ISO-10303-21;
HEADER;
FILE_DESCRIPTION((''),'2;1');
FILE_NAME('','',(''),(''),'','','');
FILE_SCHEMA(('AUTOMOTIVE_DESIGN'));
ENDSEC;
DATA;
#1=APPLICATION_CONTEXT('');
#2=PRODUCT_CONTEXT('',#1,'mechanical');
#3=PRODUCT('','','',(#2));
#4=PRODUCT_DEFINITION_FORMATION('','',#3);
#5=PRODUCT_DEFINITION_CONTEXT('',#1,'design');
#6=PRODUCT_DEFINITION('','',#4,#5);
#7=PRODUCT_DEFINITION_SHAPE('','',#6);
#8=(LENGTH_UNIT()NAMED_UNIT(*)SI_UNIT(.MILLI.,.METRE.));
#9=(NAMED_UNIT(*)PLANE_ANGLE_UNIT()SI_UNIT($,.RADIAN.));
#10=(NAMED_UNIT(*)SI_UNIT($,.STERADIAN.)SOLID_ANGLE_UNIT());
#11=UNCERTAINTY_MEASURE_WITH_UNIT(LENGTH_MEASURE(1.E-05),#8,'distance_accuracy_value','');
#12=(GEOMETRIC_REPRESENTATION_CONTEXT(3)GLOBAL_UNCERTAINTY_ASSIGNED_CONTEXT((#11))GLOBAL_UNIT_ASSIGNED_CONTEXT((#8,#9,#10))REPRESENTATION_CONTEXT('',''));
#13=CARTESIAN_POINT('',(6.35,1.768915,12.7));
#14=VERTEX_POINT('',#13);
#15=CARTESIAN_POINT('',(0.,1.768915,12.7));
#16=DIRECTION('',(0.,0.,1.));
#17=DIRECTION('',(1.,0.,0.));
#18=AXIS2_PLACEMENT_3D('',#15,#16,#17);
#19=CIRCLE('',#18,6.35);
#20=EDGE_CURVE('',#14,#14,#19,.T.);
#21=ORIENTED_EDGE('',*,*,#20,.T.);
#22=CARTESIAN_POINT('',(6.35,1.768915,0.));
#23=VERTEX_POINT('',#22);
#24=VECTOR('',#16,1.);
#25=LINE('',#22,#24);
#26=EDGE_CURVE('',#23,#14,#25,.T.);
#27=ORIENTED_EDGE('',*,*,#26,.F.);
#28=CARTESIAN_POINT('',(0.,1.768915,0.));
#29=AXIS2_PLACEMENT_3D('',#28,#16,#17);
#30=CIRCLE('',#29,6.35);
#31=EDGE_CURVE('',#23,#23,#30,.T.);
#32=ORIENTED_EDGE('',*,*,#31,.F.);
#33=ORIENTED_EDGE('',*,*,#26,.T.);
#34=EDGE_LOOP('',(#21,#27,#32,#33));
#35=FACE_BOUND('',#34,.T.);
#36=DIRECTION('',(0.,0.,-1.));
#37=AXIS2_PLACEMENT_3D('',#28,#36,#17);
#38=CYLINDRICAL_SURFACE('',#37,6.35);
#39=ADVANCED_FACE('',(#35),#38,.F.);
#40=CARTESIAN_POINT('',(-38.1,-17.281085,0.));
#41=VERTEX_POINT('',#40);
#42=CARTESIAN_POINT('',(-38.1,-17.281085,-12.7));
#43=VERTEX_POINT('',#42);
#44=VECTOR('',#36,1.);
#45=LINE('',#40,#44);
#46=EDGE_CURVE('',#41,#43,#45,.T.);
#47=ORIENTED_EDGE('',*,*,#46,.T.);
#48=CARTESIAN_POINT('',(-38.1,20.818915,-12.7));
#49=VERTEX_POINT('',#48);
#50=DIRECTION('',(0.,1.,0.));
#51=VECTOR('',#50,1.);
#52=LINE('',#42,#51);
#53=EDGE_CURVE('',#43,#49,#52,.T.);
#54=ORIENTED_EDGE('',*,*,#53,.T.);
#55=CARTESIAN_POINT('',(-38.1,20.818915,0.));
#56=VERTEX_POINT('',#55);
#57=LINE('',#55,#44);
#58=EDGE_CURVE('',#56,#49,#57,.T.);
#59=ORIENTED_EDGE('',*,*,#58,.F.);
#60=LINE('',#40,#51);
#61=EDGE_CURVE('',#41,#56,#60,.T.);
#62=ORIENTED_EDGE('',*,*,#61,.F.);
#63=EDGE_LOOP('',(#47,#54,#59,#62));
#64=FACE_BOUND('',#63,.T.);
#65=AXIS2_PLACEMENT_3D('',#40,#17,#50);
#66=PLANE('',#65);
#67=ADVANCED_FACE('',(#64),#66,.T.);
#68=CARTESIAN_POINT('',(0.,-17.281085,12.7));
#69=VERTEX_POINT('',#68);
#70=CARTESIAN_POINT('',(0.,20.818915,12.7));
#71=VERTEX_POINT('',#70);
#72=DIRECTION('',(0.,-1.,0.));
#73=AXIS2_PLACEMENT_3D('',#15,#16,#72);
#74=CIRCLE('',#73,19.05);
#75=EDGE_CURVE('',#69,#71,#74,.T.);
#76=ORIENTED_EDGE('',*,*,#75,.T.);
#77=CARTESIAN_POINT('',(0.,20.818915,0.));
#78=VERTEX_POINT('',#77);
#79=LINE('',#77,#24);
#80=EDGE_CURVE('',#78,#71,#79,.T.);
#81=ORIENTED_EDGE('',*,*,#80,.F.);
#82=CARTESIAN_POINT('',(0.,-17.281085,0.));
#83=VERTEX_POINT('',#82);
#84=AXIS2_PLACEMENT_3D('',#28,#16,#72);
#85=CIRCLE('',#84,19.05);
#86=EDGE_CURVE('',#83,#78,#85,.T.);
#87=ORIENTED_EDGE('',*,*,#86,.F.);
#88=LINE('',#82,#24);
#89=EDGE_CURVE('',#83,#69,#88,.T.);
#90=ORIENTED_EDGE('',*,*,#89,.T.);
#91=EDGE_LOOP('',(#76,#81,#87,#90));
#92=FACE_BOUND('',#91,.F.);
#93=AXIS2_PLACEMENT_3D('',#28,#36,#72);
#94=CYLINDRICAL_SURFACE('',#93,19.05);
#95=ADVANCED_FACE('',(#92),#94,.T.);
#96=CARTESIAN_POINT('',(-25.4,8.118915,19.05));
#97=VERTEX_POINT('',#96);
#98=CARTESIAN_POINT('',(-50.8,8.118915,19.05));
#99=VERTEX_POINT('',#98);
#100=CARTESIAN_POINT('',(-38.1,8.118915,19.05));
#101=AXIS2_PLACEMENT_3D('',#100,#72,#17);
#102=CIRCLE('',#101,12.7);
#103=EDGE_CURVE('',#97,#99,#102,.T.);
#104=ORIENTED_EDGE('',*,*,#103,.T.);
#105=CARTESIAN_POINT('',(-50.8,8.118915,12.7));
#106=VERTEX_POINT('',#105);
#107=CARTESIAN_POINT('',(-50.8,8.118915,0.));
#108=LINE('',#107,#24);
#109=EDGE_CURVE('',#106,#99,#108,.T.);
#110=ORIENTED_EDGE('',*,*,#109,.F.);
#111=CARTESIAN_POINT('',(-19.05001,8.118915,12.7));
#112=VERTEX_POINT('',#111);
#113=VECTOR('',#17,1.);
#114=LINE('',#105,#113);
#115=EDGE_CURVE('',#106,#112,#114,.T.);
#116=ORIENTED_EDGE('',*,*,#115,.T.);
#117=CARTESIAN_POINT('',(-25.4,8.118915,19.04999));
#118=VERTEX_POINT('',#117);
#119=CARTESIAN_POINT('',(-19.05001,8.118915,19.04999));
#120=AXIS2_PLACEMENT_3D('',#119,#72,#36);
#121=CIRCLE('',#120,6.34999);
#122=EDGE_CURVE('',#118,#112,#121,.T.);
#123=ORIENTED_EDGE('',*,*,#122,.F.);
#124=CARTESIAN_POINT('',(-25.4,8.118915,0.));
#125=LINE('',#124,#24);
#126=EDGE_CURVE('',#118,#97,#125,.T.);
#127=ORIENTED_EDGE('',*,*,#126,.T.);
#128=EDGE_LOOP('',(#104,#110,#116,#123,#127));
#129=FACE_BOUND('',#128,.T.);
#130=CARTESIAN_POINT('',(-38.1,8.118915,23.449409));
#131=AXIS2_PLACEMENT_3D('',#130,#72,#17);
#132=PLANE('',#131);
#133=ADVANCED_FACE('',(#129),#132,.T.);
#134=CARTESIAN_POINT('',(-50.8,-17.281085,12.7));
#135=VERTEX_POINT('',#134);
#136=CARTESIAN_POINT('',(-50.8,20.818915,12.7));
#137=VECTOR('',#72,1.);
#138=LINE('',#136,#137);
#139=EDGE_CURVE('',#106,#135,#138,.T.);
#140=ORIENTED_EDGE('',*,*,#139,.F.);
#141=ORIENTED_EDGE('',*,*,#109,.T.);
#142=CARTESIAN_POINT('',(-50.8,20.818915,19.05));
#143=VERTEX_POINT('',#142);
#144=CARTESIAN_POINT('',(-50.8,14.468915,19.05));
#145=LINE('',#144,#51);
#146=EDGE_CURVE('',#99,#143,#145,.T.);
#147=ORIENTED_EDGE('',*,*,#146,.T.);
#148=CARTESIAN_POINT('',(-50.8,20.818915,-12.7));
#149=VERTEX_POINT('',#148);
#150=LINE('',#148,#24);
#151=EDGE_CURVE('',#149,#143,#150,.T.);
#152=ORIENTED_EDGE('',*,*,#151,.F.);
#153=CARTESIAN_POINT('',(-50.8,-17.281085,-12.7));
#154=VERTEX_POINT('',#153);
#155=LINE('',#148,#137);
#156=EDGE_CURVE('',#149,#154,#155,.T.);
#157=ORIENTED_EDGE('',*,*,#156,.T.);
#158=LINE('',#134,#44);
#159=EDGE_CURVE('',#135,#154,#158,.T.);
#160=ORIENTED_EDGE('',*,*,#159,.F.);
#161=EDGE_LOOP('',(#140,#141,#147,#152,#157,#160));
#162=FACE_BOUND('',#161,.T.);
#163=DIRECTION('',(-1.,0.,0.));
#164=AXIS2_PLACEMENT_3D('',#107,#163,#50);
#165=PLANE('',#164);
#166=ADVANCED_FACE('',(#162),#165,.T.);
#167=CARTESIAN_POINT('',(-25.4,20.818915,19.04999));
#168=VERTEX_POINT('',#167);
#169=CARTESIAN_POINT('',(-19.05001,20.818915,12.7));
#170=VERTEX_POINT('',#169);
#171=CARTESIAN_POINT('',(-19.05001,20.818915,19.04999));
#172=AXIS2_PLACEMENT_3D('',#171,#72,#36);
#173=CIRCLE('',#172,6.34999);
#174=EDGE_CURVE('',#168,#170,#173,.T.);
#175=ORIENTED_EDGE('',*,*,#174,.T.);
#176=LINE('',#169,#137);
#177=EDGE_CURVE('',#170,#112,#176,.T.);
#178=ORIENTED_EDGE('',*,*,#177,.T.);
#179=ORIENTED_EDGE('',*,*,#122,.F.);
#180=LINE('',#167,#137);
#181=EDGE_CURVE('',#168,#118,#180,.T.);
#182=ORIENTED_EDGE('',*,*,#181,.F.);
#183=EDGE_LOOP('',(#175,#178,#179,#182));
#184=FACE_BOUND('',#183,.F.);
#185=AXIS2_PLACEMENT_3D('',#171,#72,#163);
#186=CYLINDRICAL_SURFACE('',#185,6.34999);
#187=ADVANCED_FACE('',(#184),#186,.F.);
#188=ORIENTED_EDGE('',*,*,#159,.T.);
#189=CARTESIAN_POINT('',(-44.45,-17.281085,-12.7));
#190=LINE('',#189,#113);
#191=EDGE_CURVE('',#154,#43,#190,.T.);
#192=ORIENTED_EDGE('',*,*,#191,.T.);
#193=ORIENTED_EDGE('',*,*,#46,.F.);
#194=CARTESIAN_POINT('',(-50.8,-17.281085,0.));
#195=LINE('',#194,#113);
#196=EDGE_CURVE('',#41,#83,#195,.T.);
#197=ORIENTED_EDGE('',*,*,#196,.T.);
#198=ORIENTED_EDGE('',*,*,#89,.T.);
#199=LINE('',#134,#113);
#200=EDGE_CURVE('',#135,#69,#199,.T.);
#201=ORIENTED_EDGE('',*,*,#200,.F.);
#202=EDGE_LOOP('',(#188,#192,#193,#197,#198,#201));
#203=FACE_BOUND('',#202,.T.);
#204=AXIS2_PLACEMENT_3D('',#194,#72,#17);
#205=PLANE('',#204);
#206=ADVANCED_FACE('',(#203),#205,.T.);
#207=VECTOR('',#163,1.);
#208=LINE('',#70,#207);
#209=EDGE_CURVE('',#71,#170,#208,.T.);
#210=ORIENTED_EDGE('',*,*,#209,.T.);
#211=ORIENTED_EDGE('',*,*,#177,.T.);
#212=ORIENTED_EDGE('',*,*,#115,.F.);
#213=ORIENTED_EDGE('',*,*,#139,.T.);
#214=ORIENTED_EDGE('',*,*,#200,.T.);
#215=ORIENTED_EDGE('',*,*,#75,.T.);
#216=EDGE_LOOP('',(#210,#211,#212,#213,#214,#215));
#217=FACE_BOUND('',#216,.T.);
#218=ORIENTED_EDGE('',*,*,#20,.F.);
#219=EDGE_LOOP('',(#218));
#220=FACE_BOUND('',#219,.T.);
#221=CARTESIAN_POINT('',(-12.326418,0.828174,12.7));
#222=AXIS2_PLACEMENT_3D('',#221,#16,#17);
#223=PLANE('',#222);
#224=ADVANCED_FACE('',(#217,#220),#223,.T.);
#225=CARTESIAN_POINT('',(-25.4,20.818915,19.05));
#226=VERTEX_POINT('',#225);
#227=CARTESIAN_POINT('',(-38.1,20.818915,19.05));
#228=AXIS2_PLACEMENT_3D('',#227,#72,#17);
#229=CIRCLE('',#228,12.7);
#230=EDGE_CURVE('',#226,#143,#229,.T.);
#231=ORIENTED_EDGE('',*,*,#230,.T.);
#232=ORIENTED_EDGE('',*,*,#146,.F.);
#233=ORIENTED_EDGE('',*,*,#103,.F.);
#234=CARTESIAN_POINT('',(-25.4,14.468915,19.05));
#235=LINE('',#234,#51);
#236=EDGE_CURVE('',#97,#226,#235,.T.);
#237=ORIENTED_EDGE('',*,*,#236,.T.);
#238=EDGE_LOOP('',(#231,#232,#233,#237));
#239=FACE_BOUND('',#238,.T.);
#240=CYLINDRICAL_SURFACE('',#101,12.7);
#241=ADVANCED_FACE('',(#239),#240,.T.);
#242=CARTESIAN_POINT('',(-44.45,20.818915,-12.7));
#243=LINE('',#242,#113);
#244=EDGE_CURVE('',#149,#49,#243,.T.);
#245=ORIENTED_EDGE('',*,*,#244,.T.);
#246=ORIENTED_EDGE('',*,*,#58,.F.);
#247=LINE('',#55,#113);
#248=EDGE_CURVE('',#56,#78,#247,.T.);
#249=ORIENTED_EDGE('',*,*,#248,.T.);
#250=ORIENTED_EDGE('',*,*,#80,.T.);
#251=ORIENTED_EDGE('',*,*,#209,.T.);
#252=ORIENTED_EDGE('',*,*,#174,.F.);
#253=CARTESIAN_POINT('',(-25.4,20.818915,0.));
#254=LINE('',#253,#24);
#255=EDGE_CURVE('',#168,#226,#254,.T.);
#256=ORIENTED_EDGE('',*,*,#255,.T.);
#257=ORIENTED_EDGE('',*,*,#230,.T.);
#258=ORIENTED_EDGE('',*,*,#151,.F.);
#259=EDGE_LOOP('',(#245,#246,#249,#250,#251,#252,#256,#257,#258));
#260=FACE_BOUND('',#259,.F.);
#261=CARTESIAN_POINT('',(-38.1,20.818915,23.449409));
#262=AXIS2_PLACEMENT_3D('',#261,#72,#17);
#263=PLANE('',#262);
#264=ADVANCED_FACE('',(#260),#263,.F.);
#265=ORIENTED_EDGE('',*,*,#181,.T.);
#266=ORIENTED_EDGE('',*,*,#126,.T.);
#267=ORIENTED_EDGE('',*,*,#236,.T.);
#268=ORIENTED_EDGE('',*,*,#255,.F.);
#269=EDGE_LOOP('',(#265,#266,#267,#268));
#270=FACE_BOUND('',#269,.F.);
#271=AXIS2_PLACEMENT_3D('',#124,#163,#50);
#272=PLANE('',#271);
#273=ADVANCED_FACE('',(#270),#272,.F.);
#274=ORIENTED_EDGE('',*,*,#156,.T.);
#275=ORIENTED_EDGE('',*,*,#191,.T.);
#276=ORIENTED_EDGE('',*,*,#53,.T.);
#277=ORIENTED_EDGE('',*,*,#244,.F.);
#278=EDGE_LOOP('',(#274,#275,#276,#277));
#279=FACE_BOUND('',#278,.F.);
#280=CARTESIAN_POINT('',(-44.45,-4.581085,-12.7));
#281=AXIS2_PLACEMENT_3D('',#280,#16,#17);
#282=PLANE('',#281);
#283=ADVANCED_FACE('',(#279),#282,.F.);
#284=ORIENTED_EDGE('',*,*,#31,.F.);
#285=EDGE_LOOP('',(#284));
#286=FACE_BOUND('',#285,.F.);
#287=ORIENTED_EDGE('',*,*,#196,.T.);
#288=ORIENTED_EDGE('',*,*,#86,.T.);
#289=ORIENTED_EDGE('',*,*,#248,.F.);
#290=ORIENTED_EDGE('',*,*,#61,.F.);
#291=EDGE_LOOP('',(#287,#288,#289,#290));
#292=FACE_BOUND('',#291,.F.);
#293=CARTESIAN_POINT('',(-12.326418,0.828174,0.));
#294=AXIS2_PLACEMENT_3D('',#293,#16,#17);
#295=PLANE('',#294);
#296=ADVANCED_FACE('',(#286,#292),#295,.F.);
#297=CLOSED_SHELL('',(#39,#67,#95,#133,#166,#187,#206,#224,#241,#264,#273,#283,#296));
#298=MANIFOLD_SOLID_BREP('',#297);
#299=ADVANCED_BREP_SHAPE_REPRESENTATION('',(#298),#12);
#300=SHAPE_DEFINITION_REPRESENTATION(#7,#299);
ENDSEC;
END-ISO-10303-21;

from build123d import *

# Parameters (mm, degrees)
F0_R     = 6.35
F0_W     = 12.7
F0_H     = 25.4
F0_H_2   = 12.7
F1_DEPTH = 12.7
F2_DEPTH = 12.7
F3_DEPTH = 19.05
F4_DEPTH = 12.7
F6_DEPTH = 12.7
F7_R     = 6.34999


# Not quite as in the source:
# - a fillet or chamfer is up to 0.001 mm smaller than in the source, because OpenCascade refuses the exact size


with BuildPart() as f1:
    # F0 (on Top) → F1 (new body)
    with BuildSketch(Plane.XY):
        with BuildLine():
            ThreePointArc((0, -17.2810847643), (19.05, 1.7689152357), (0, 20.8189152357))
            Line((0, 20.8189152357), (-25.4, 20.8189152357))
            Line((-25.4, 20.8189152357), (-25.4, 8.1189152357))
            Line((-25.4, 8.1189152357), (-38.1, 8.1189152357))
            Line((-38.1, 8.1189152357), (-38.1, -17.2810847643))
            Line((-38.1, -17.2810847643), (0, -17.2810847643))
        make_face()
        with Locations((0, 1.7689152357)):
            Circle(F0_R, mode=Mode.SUBTRACT)
        with Locations((-44.45, -4.5810847643)):
            Rectangle(F0_W, F0_H)
        with Locations((-44.45, 14.4689152357)):
            Rectangle(F0_W, F0_H_2)
        with Locations((-31.75, 14.4689152357)):
            Rectangle(F0_W, F0_H_2)
    extrude(amount=F1_DEPTH)

    # F0 (on Top) → F2 (join)
    with BuildSketch(Plane.XY):
        with Locations((-44.45, -4.5810847643)):
            Rectangle(F0_W, F0_H)
        with Locations((-44.45, 14.4689152357)):
            Rectangle(F0_W, F0_H_2)
    extrude(amount=-F2_DEPTH)

    # F0 (on Top) → F3 (join)
    with BuildSketch(Plane.XY):
        with Locations((-31.75, 14.4689152357)):
            Rectangle(F0_W, F0_H_2)
    extrude(amount=F3_DEPTH)

    # F4 (add): a face of the model
    f4_faces = [f1.faces().sort_by_distance(p)[0] for p in [
        (-38.1, 14.4689152357, 15.875),
    ]]
    extrude(f4_faces, amount=F4_DEPTH)

    # F5 (on face) → F6 (join)
    with BuildSketch(Plane.XZ.offset(-8.1189152357)):
        with BuildLine():
            Line((-50.8, 19.05), (-25.4, 19.05))
            ThreePointArc((-25.4, 19.05), (-38.1, 31.75), (-50.8, 19.05))
        make_face()
    extrude(amount=-F6_DEPTH)

    # F7 (radius 6.35 in the source; OpenCascade refuses exactly that, so slightly less here)
    f7_edges = [f1.edges().sort_by_distance(p)[0] for p in [
        (-25.4, 14.468915, 12.7),
    ]]
    fillet(f7_edges, radius=F7_R)


solid = f1.part
